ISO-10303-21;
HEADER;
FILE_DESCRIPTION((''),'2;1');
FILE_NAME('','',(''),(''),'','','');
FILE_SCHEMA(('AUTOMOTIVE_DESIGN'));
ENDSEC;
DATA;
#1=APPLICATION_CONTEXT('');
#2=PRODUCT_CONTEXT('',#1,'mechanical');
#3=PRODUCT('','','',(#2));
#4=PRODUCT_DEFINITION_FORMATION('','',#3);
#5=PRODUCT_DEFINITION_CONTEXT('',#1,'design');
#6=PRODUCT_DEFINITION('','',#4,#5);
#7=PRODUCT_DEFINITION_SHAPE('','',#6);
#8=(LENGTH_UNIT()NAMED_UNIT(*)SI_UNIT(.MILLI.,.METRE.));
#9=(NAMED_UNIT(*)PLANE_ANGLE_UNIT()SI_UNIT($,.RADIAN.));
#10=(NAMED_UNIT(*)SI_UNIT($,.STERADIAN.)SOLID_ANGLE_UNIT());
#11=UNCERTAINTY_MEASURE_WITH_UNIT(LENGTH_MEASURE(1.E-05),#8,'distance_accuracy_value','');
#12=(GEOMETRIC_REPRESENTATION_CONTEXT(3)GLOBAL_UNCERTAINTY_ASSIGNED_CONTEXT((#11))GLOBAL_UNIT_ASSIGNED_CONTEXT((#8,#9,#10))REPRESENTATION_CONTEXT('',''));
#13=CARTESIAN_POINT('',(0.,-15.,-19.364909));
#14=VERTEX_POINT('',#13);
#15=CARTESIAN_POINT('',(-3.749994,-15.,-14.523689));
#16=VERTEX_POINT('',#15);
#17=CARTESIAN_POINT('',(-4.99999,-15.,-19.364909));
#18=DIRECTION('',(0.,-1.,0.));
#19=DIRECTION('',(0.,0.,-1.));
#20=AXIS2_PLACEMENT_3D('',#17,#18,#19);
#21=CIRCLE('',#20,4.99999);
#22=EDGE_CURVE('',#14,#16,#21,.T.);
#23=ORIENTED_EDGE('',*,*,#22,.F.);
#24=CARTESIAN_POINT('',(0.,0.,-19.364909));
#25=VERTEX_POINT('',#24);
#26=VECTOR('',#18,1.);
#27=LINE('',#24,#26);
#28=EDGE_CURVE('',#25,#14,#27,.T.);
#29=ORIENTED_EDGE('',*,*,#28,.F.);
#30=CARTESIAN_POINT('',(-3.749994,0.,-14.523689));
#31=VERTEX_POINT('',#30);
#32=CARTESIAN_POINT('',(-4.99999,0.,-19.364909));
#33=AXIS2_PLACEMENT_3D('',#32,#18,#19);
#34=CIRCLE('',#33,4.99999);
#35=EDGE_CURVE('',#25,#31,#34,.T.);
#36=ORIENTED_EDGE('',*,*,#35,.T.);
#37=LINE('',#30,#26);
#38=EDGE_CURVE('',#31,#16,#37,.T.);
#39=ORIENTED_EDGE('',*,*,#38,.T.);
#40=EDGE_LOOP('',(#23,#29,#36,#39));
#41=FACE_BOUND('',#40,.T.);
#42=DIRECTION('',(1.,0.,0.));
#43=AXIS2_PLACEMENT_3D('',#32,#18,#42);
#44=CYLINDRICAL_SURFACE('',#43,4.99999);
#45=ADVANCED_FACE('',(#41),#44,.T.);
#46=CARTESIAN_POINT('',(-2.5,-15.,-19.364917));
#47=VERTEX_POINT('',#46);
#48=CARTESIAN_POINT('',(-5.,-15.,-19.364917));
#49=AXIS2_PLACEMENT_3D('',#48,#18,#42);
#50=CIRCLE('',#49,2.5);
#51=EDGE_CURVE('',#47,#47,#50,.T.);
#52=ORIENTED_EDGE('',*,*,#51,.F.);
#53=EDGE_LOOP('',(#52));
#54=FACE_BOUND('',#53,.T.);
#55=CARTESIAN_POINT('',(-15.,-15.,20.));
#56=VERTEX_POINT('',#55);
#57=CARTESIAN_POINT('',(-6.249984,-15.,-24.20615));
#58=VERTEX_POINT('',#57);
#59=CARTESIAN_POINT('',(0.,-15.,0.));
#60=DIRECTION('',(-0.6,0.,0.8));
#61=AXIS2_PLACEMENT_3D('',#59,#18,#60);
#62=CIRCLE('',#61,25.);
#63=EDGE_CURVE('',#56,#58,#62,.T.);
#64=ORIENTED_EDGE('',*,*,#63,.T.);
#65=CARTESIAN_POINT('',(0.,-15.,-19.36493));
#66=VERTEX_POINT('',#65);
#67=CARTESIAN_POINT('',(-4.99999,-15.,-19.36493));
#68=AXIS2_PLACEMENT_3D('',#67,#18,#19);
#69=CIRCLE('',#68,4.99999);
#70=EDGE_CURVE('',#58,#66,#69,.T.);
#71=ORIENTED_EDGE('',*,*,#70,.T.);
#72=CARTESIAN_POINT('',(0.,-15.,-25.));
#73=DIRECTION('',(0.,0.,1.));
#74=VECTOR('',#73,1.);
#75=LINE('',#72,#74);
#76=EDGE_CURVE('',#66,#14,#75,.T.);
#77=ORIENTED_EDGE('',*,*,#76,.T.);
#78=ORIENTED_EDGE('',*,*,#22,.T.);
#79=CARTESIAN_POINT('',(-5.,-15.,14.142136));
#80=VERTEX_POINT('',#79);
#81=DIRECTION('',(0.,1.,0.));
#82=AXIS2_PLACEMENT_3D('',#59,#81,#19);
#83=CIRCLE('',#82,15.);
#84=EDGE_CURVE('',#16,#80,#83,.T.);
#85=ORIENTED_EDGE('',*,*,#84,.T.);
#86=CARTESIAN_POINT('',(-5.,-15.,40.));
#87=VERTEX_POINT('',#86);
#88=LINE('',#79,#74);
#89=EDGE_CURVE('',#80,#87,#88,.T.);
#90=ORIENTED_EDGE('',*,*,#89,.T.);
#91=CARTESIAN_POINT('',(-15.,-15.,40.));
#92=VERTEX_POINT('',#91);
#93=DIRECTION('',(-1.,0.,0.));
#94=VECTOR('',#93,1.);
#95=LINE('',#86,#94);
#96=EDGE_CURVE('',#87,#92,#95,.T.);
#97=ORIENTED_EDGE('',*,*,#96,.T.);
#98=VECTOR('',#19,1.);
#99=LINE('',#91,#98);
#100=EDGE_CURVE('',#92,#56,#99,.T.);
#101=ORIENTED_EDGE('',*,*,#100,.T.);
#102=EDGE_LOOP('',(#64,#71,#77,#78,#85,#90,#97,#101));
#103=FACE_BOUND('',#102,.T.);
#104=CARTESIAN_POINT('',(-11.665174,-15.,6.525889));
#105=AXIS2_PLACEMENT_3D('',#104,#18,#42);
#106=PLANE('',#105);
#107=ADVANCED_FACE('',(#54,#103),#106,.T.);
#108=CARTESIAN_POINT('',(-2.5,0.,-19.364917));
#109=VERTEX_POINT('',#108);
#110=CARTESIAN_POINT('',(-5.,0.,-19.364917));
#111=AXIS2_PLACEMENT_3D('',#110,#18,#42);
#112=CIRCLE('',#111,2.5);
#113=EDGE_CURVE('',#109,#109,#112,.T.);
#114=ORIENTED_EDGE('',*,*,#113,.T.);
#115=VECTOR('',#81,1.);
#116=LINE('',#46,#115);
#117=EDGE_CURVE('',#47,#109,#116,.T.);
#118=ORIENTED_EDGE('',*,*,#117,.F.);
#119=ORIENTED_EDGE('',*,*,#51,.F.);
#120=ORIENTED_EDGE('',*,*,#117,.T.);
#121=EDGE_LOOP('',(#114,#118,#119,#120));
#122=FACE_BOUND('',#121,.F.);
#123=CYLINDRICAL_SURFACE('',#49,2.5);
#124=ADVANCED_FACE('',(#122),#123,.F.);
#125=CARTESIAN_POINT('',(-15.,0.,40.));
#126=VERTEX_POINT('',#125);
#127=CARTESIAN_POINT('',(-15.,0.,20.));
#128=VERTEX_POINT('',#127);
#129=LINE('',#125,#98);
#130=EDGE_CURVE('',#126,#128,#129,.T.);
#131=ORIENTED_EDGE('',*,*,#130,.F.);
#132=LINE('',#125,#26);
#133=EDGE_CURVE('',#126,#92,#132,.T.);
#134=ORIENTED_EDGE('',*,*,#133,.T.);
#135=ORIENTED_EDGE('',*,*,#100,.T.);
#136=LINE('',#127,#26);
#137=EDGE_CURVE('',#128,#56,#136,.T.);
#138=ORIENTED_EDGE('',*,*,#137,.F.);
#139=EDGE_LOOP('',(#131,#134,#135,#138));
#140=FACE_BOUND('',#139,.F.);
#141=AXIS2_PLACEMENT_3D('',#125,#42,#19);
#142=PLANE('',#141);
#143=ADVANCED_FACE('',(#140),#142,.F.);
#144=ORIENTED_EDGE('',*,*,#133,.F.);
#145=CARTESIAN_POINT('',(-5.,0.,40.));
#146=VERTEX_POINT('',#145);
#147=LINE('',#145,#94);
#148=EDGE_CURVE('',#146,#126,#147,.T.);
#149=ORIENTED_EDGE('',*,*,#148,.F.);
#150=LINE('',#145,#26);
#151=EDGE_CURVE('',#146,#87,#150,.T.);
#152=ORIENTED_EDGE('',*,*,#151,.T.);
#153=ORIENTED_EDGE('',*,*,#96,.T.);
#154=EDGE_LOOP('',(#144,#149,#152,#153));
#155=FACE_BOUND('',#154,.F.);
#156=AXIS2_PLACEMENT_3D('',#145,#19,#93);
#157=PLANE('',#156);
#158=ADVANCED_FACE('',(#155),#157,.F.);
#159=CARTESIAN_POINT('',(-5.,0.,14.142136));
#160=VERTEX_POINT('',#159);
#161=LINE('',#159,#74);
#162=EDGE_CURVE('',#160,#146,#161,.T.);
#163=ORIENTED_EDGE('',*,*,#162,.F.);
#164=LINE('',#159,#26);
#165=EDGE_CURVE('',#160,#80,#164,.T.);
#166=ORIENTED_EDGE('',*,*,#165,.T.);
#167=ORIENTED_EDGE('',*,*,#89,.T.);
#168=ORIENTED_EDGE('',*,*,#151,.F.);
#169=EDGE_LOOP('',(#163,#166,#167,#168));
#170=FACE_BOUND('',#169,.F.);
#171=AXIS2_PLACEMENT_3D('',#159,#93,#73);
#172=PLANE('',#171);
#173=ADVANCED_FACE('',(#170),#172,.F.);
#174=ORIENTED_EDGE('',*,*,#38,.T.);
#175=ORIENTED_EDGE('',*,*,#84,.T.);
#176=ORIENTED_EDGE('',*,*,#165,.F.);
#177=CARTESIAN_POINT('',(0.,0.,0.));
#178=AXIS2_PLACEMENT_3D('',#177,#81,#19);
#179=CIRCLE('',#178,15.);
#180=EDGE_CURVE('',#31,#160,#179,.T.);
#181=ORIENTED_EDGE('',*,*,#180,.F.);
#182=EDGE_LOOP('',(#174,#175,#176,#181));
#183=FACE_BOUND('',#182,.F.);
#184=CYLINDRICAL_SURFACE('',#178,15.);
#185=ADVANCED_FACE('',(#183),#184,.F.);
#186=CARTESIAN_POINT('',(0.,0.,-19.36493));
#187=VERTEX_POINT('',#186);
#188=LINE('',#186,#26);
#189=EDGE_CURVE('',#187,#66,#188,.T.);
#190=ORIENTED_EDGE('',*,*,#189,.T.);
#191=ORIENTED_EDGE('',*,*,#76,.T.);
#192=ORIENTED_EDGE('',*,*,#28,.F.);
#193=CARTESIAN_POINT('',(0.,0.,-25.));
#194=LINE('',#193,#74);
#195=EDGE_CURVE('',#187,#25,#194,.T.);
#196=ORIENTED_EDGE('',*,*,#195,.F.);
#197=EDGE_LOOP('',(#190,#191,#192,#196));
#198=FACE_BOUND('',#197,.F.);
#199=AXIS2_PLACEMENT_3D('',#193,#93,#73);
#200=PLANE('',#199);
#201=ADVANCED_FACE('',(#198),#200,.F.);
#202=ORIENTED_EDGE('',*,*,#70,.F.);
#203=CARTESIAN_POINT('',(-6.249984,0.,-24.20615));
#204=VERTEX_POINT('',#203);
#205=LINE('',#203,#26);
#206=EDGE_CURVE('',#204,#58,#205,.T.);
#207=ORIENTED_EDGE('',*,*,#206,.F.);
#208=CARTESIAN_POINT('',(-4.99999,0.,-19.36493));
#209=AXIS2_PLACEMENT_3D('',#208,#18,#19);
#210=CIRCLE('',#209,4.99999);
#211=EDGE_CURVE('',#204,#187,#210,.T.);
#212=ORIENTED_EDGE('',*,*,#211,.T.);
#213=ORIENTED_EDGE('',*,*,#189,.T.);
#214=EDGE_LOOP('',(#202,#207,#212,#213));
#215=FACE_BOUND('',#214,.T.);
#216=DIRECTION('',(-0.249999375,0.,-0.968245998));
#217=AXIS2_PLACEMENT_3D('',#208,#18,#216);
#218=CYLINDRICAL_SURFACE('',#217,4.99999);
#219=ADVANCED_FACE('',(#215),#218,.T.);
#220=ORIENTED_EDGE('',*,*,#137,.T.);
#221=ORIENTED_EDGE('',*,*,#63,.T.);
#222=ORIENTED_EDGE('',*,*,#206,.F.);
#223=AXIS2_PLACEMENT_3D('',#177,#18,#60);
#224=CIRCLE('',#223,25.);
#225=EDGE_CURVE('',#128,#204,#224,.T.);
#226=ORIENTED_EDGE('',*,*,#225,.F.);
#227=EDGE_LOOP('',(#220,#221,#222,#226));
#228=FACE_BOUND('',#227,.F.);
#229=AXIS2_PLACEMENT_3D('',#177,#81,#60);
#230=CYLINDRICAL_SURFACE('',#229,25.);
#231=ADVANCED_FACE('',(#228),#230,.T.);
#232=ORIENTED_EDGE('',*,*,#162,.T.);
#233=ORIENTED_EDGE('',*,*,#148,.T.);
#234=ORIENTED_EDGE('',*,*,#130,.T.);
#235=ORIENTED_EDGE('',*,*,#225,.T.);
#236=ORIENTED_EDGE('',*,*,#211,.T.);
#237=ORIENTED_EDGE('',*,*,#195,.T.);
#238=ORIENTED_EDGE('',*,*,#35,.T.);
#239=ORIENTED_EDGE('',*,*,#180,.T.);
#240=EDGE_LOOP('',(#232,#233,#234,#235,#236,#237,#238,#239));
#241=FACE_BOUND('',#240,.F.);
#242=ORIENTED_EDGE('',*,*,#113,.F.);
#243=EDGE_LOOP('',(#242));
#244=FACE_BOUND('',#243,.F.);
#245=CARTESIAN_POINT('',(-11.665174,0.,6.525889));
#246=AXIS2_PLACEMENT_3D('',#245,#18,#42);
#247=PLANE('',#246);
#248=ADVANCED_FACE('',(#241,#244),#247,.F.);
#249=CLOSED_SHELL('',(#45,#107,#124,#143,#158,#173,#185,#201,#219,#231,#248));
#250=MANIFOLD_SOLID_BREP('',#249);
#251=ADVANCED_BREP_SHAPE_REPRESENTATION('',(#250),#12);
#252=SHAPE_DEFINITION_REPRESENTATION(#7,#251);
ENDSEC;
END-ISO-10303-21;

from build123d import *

# Parameters (mm, degrees)
F1_DEPTH = 15
F2_R     = 4.99999
F3_R     = 2.5
F4_DEPTH = 15.001


# Not quite as in the source:
# - a fillet or chamfer is up to 0.001 mm smaller than in the source, because OpenCascade refuses the exact size


with BuildPart() as f1:
    # F0 (on Front) → F1 (new body)
    with BuildSketch(Plane.XZ):
        with BuildLine():
            Line((-15, 40), (-15, 20))
            ThreePointArc((-15, 20), (-23.7170824513, -7.9056941504), (0, -25))
            Line((0, -25), (0, -15))
            ThreePointArc((0, -15), (-14.7839783948, -2.5365296809), (-5, 14.1421356237))
            Line((-5, 14.1421356237), (-5, 40))
            Line((-5, 40), (-15, 40))
        make_face()
    extrude(amount=F1_DEPTH)

    # F2 (radius 5 in the source; OpenCascade refuses exactly that, so slightly less here)
    f2_edges = [f1.edges().sort_by_distance(p)[0] for p in [
        (0, -7.5, -25),
        (0, -7.5, -15),
    ]]
    fillet(f2_edges, radius=F2_R)

    # F3 (on face) → F4 (cut, through all)
    with BuildSketch(Plane.XZ.offset(15)):
        with Locations((-5, -19.364916731)):
            Circle(F3_R)
    extrude(amount=-F4_DEPTH, mode=Mode.SUBTRACT)


solid = f1.part
